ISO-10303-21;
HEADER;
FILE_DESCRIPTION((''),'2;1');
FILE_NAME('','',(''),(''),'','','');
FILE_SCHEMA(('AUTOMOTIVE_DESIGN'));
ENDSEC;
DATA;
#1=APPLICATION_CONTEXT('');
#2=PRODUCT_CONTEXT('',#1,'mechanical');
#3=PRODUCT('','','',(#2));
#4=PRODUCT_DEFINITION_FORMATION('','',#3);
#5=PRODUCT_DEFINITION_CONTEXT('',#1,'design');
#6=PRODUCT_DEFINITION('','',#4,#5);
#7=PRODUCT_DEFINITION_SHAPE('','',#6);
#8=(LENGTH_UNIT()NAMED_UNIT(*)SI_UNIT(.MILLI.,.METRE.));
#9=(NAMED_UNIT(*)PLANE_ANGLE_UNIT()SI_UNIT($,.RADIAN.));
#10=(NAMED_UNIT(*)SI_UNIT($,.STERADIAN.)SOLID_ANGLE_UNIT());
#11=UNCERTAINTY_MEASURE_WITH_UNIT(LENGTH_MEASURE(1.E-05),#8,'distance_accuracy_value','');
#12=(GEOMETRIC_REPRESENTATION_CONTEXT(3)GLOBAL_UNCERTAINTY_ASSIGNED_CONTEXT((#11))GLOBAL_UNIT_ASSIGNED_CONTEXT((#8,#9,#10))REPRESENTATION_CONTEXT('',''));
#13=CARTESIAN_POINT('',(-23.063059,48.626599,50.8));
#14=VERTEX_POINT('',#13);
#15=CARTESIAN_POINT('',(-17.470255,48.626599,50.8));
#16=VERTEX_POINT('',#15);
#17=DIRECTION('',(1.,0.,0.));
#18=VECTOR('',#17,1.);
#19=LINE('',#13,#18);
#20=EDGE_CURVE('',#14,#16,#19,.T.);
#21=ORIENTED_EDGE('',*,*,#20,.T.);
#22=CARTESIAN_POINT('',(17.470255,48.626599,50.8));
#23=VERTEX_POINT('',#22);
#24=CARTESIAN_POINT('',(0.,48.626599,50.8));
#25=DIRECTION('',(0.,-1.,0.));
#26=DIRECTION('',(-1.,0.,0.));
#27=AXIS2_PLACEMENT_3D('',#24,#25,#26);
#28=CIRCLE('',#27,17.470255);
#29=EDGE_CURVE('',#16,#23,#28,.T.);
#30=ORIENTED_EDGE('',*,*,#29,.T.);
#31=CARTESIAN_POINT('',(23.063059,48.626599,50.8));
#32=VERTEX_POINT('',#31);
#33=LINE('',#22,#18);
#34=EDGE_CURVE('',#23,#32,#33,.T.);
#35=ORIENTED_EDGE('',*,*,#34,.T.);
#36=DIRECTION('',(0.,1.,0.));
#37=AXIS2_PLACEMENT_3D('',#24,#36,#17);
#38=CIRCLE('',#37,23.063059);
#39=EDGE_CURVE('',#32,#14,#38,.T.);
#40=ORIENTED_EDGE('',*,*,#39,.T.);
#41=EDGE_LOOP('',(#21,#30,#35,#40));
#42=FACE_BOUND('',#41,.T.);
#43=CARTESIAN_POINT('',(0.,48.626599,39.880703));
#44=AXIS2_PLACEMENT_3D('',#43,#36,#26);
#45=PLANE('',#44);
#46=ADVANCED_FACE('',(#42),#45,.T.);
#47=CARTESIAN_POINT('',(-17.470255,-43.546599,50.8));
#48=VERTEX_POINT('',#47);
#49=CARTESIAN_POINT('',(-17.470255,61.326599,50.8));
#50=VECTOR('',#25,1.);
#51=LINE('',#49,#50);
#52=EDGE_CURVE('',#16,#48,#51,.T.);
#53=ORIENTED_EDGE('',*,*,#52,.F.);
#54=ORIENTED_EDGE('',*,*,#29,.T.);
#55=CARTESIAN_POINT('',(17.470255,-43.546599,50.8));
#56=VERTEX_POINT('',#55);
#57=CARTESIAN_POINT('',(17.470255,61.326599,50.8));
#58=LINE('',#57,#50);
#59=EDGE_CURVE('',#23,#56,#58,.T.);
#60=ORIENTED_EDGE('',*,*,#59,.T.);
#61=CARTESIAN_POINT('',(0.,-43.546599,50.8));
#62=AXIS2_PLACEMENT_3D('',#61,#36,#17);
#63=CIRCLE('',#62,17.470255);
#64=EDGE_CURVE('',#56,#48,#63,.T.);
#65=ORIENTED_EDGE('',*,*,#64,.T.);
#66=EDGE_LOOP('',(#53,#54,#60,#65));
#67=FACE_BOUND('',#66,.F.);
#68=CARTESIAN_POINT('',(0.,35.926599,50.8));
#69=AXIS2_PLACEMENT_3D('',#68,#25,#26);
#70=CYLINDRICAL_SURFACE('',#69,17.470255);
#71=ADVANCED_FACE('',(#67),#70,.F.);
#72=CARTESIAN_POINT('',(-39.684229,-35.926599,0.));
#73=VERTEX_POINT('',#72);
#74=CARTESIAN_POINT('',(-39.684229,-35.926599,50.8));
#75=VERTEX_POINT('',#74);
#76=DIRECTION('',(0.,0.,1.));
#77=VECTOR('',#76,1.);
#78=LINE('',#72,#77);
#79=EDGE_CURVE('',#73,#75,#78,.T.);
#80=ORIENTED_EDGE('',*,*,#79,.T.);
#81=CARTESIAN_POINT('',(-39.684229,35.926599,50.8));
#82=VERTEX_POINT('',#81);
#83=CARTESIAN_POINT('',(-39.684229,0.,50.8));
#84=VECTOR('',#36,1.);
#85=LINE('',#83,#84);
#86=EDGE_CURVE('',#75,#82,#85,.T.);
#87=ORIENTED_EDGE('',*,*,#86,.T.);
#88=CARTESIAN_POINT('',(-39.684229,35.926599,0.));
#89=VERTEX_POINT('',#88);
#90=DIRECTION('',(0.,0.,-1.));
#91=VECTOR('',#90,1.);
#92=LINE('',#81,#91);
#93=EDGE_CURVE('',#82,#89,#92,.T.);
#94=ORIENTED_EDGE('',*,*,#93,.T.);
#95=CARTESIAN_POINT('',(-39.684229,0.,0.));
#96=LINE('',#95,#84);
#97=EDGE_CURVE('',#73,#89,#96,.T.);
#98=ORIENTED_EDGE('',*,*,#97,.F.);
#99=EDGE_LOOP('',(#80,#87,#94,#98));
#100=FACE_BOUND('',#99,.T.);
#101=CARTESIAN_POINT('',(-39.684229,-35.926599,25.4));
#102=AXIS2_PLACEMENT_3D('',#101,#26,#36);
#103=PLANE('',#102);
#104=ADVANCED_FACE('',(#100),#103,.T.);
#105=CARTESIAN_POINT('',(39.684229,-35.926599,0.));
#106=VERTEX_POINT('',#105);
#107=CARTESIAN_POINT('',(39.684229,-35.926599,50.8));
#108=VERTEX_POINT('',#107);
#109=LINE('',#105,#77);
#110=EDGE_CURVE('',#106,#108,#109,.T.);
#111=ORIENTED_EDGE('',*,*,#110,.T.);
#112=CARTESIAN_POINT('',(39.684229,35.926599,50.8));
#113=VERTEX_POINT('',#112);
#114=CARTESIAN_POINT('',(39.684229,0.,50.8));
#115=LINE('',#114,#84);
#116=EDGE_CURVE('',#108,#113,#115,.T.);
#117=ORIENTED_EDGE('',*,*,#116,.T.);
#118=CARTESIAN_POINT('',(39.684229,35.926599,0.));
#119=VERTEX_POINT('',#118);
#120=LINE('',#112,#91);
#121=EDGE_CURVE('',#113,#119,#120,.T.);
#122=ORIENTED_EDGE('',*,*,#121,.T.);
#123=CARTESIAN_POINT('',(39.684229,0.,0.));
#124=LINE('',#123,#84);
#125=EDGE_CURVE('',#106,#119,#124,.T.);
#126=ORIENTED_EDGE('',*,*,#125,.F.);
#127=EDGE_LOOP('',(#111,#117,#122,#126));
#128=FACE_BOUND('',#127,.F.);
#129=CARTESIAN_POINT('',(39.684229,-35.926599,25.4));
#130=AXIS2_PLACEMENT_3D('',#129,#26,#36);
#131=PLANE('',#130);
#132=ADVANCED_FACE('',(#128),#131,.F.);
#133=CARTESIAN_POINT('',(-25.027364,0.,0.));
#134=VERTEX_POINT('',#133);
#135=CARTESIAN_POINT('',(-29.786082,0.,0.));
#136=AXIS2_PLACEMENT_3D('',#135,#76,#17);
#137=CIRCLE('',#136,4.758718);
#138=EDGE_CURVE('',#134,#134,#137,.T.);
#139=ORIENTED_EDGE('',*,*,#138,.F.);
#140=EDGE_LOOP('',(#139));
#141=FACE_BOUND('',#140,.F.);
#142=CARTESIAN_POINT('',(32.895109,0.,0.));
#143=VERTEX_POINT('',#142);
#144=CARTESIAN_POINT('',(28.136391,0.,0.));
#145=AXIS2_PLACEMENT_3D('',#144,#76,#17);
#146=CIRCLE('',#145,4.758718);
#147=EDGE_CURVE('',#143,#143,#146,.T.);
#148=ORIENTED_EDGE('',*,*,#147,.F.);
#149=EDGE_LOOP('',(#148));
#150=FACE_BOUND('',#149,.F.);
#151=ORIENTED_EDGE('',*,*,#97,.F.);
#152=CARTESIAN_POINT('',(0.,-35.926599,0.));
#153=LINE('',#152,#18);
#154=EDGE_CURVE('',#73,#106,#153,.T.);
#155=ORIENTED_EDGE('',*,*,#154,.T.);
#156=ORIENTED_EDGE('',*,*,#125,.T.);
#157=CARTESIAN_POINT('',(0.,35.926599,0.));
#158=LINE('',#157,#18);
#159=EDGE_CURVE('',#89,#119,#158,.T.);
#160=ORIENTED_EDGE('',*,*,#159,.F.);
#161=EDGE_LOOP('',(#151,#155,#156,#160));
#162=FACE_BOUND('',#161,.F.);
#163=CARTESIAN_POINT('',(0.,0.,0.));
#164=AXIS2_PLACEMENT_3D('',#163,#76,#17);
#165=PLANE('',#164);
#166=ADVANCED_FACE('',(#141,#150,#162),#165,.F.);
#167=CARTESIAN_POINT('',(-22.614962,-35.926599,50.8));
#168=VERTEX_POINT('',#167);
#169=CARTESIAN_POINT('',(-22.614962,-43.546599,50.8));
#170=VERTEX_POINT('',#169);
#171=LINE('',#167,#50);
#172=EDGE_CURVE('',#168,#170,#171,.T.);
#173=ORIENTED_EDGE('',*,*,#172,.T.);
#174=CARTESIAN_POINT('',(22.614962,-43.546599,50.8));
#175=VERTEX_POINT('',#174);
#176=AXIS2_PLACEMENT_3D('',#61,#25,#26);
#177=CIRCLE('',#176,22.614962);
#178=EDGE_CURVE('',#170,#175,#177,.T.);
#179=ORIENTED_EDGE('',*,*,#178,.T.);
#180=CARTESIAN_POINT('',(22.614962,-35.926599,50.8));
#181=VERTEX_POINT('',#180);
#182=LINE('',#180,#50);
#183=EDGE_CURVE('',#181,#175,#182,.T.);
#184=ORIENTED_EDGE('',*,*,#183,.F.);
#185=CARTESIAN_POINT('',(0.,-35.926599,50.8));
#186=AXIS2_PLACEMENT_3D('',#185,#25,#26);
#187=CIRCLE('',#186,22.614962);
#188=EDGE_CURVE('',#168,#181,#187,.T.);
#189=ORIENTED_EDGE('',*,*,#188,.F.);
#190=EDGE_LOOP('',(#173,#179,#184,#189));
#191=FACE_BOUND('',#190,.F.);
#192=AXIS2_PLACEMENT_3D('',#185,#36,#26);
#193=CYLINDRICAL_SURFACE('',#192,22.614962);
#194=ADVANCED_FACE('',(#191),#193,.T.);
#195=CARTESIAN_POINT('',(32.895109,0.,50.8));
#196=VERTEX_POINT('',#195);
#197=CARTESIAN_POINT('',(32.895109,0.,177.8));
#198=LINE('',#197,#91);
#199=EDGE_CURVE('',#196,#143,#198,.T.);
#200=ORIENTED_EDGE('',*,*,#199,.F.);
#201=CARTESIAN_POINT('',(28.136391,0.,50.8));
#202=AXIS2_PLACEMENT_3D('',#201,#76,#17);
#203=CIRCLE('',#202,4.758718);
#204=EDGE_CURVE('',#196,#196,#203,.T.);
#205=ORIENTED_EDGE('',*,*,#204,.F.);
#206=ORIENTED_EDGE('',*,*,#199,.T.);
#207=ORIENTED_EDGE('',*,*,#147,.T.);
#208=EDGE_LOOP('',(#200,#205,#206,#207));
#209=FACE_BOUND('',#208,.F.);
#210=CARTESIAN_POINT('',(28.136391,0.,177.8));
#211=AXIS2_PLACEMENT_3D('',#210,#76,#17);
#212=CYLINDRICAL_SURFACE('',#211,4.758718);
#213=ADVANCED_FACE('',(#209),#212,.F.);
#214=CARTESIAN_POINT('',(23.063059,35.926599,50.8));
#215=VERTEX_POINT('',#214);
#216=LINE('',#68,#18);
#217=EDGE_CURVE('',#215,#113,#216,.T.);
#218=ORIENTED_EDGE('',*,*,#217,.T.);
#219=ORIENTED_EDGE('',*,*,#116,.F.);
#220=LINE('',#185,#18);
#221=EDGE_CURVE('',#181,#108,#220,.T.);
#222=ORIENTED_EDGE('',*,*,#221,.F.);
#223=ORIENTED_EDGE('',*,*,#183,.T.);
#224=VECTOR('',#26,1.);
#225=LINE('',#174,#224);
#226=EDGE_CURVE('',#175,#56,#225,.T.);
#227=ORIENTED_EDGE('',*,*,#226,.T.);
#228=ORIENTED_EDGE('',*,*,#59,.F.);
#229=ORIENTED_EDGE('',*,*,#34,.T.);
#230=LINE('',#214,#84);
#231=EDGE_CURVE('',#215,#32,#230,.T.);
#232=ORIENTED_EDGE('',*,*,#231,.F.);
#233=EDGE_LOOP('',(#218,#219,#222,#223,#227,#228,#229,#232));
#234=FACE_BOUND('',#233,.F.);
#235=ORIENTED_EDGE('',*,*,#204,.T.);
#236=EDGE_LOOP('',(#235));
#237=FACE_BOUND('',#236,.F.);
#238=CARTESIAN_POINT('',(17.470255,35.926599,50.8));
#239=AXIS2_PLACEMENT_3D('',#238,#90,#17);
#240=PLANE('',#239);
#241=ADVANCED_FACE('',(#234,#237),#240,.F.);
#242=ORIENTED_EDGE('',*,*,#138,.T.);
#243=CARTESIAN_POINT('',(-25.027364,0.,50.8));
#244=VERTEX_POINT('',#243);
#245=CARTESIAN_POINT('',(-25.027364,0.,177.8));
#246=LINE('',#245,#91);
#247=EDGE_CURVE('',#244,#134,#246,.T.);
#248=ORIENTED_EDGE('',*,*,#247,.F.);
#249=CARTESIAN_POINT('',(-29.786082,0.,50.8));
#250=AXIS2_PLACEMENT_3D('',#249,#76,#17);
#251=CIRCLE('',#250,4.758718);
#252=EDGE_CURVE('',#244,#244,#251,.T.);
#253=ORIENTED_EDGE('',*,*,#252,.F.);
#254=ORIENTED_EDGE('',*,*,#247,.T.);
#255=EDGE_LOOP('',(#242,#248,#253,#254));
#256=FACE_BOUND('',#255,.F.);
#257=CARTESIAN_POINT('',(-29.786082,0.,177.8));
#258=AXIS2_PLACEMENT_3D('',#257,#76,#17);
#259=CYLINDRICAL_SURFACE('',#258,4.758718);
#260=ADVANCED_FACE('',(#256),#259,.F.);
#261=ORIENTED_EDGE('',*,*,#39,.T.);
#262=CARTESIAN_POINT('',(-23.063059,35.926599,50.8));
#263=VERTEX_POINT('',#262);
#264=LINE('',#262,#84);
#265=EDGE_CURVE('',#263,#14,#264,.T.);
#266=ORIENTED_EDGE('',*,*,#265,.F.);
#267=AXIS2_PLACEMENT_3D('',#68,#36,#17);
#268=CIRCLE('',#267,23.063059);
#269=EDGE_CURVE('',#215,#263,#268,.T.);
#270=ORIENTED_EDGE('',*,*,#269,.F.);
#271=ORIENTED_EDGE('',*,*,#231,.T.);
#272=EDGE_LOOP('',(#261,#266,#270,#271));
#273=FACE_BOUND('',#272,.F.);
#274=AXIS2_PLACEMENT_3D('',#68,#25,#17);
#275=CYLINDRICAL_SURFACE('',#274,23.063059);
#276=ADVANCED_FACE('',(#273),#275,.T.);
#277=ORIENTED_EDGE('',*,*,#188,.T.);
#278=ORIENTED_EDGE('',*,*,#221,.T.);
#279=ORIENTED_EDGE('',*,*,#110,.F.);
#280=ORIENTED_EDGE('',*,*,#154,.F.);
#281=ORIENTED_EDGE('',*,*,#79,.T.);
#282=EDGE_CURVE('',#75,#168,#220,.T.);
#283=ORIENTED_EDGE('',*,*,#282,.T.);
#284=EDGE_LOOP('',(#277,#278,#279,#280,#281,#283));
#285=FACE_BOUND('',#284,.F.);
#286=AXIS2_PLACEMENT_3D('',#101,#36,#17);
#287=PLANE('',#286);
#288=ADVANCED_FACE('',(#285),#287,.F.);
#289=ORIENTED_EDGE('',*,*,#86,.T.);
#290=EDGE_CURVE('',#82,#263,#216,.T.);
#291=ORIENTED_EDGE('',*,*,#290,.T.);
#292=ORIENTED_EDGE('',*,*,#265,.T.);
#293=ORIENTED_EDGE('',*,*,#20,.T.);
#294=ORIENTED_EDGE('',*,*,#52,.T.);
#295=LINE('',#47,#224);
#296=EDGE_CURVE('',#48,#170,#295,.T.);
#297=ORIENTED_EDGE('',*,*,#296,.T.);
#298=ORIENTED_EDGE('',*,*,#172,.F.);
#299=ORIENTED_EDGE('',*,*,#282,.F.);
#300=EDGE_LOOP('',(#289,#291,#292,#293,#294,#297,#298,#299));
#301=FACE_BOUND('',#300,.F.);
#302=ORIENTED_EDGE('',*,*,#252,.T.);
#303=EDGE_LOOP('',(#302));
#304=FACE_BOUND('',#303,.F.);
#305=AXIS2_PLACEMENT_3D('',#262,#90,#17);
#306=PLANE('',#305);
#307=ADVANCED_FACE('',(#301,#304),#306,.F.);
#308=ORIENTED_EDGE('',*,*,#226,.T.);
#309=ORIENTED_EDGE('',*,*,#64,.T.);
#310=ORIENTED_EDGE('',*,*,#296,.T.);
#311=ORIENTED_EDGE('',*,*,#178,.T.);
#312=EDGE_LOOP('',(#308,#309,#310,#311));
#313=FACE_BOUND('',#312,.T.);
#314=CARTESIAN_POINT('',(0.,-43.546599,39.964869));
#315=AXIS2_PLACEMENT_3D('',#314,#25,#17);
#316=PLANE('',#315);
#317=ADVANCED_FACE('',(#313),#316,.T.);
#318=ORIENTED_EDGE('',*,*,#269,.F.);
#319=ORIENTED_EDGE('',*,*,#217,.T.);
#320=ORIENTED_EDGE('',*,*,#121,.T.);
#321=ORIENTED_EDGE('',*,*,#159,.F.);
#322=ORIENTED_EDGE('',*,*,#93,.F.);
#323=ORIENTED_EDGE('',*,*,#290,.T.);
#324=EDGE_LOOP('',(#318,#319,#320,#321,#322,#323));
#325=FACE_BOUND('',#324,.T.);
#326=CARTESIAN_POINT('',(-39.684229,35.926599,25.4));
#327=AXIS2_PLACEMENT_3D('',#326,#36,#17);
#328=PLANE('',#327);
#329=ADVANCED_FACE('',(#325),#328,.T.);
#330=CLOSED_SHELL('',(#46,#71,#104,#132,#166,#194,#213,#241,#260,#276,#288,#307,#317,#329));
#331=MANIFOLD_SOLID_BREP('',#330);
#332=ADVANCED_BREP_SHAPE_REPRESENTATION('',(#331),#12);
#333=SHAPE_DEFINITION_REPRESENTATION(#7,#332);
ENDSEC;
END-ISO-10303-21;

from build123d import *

# Parameters (mm, degrees)
F0_W      = 79.3684571981
F0_H      = 71.8531981111
F1_DEPTH  = 25.4
F2_DEPTH  = 25.4
F4_DEPTH  = 101.6
F5_R      = 4.7587178315
F6_DEPTH  = 127
F7_DEPTH  = 508
F9_DEPTH  = 7.62
F11_DEPTH = 25.4
F12_DEPTH = 12.7


with BuildPart() as f1:
    # F0 (on Top) → F1 (new body)
    with BuildSketch(Plane.XY):
        Rectangle(F0_W, F0_H)
    extrude(amount=F1_DEPTH)

    # F2 (add): a face of the model
    f2_faces = [f1.faces().sort_by_distance(p)[0] for p in [
        (0, 0, 25.4),
    ]]
    extrude(f2_faces, amount=F2_DEPTH)

    # F3 (on face) → F4 (cut)
    with BuildSketch(Plane.XZ.offset(35.9265990555)):
        with BuildLine():
            ThreePointArc((-17.4702548625, 50.8), (0, 33.3297451375), (17.4702548625, 50.8))
            Line((17.4702548625, 50.8), (-17.4702548625, 50.8))
        make_face()
    extrude(amount=-F4_DEPTH, mode=Mode.SUBTRACT)

    # F5 (on face) → F6 (join)
    with BuildSketch(Plane.XY.offset(50.8)):
        with Locations((-29.7860819846, 0)):
            Circle(F5_R)
        with Locations((28.1363911927, 0)):
            Circle(F5_R)
    extrude(amount=F6_DEPTH)

    # F7 (cut): faces of the model
    f7_faces = [f1.faces().sort_by_distance(p)[0] for p in [
        (28.1363911927, 0, 177.8),
        (-29.7860819846, 0, 177.8),
    ]]
    extrude(f7_faces, amount=-F7_DEPTH, mode=Mode.SUBTRACT)

    # F8 (on face) → F9 (join)
    with BuildSketch(Plane.XZ.offset(35.9265990555)):
        with BuildLine():
            Line((-17.4702548625, 50.8), (-22.6149617575, 50.8))
            ThreePointArc((-22.6149617575, 50.8), (0, 28.1850382425), (22.6149617575, 50.8))
            Line((22.6149617575, 50.8), (17.4702548625, 50.8))
            ThreePointArc((17.4702548625, 50.8), (0, 33.3297451375), (-17.4702548625, 50.8))
        make_face()
    extrude(amount=F9_DEPTH)

    # F10 (on face) → F11 (join)
    with BuildSketch(Plane(origin=(0, 35.9265990555, 0), x_dir=(-1, 0, 0), z_dir=(0, 1, 0))):
        with BuildLine():
            Line((-17.4702548625, 50.8), (-23.0630593563, 50.8))
            ThreePointArc((-23.0630593563, 50.8), (0, 27.7369406437), (23.0630593563, 50.8))
            Line((23.0630593563, 50.8), (17.4702548625, 50.8))
            ThreePointArc((17.4702548625, 50.8), (0, 33.3297451375), (-17.4702548625, 50.8))
        make_face()
    extrude(amount=F11_DEPTH)

    # F12 (cut): a face of the model
    f12_faces = [f1.faces().sort_by_distance(p)[0] for p in [
        (20.2666571094, 61.3265990555, 50.2842943151),
    ]]
    extrude(f12_faces, amount=-F12_DEPTH, mode=Mode.SUBTRACT)


solid = f1.part
